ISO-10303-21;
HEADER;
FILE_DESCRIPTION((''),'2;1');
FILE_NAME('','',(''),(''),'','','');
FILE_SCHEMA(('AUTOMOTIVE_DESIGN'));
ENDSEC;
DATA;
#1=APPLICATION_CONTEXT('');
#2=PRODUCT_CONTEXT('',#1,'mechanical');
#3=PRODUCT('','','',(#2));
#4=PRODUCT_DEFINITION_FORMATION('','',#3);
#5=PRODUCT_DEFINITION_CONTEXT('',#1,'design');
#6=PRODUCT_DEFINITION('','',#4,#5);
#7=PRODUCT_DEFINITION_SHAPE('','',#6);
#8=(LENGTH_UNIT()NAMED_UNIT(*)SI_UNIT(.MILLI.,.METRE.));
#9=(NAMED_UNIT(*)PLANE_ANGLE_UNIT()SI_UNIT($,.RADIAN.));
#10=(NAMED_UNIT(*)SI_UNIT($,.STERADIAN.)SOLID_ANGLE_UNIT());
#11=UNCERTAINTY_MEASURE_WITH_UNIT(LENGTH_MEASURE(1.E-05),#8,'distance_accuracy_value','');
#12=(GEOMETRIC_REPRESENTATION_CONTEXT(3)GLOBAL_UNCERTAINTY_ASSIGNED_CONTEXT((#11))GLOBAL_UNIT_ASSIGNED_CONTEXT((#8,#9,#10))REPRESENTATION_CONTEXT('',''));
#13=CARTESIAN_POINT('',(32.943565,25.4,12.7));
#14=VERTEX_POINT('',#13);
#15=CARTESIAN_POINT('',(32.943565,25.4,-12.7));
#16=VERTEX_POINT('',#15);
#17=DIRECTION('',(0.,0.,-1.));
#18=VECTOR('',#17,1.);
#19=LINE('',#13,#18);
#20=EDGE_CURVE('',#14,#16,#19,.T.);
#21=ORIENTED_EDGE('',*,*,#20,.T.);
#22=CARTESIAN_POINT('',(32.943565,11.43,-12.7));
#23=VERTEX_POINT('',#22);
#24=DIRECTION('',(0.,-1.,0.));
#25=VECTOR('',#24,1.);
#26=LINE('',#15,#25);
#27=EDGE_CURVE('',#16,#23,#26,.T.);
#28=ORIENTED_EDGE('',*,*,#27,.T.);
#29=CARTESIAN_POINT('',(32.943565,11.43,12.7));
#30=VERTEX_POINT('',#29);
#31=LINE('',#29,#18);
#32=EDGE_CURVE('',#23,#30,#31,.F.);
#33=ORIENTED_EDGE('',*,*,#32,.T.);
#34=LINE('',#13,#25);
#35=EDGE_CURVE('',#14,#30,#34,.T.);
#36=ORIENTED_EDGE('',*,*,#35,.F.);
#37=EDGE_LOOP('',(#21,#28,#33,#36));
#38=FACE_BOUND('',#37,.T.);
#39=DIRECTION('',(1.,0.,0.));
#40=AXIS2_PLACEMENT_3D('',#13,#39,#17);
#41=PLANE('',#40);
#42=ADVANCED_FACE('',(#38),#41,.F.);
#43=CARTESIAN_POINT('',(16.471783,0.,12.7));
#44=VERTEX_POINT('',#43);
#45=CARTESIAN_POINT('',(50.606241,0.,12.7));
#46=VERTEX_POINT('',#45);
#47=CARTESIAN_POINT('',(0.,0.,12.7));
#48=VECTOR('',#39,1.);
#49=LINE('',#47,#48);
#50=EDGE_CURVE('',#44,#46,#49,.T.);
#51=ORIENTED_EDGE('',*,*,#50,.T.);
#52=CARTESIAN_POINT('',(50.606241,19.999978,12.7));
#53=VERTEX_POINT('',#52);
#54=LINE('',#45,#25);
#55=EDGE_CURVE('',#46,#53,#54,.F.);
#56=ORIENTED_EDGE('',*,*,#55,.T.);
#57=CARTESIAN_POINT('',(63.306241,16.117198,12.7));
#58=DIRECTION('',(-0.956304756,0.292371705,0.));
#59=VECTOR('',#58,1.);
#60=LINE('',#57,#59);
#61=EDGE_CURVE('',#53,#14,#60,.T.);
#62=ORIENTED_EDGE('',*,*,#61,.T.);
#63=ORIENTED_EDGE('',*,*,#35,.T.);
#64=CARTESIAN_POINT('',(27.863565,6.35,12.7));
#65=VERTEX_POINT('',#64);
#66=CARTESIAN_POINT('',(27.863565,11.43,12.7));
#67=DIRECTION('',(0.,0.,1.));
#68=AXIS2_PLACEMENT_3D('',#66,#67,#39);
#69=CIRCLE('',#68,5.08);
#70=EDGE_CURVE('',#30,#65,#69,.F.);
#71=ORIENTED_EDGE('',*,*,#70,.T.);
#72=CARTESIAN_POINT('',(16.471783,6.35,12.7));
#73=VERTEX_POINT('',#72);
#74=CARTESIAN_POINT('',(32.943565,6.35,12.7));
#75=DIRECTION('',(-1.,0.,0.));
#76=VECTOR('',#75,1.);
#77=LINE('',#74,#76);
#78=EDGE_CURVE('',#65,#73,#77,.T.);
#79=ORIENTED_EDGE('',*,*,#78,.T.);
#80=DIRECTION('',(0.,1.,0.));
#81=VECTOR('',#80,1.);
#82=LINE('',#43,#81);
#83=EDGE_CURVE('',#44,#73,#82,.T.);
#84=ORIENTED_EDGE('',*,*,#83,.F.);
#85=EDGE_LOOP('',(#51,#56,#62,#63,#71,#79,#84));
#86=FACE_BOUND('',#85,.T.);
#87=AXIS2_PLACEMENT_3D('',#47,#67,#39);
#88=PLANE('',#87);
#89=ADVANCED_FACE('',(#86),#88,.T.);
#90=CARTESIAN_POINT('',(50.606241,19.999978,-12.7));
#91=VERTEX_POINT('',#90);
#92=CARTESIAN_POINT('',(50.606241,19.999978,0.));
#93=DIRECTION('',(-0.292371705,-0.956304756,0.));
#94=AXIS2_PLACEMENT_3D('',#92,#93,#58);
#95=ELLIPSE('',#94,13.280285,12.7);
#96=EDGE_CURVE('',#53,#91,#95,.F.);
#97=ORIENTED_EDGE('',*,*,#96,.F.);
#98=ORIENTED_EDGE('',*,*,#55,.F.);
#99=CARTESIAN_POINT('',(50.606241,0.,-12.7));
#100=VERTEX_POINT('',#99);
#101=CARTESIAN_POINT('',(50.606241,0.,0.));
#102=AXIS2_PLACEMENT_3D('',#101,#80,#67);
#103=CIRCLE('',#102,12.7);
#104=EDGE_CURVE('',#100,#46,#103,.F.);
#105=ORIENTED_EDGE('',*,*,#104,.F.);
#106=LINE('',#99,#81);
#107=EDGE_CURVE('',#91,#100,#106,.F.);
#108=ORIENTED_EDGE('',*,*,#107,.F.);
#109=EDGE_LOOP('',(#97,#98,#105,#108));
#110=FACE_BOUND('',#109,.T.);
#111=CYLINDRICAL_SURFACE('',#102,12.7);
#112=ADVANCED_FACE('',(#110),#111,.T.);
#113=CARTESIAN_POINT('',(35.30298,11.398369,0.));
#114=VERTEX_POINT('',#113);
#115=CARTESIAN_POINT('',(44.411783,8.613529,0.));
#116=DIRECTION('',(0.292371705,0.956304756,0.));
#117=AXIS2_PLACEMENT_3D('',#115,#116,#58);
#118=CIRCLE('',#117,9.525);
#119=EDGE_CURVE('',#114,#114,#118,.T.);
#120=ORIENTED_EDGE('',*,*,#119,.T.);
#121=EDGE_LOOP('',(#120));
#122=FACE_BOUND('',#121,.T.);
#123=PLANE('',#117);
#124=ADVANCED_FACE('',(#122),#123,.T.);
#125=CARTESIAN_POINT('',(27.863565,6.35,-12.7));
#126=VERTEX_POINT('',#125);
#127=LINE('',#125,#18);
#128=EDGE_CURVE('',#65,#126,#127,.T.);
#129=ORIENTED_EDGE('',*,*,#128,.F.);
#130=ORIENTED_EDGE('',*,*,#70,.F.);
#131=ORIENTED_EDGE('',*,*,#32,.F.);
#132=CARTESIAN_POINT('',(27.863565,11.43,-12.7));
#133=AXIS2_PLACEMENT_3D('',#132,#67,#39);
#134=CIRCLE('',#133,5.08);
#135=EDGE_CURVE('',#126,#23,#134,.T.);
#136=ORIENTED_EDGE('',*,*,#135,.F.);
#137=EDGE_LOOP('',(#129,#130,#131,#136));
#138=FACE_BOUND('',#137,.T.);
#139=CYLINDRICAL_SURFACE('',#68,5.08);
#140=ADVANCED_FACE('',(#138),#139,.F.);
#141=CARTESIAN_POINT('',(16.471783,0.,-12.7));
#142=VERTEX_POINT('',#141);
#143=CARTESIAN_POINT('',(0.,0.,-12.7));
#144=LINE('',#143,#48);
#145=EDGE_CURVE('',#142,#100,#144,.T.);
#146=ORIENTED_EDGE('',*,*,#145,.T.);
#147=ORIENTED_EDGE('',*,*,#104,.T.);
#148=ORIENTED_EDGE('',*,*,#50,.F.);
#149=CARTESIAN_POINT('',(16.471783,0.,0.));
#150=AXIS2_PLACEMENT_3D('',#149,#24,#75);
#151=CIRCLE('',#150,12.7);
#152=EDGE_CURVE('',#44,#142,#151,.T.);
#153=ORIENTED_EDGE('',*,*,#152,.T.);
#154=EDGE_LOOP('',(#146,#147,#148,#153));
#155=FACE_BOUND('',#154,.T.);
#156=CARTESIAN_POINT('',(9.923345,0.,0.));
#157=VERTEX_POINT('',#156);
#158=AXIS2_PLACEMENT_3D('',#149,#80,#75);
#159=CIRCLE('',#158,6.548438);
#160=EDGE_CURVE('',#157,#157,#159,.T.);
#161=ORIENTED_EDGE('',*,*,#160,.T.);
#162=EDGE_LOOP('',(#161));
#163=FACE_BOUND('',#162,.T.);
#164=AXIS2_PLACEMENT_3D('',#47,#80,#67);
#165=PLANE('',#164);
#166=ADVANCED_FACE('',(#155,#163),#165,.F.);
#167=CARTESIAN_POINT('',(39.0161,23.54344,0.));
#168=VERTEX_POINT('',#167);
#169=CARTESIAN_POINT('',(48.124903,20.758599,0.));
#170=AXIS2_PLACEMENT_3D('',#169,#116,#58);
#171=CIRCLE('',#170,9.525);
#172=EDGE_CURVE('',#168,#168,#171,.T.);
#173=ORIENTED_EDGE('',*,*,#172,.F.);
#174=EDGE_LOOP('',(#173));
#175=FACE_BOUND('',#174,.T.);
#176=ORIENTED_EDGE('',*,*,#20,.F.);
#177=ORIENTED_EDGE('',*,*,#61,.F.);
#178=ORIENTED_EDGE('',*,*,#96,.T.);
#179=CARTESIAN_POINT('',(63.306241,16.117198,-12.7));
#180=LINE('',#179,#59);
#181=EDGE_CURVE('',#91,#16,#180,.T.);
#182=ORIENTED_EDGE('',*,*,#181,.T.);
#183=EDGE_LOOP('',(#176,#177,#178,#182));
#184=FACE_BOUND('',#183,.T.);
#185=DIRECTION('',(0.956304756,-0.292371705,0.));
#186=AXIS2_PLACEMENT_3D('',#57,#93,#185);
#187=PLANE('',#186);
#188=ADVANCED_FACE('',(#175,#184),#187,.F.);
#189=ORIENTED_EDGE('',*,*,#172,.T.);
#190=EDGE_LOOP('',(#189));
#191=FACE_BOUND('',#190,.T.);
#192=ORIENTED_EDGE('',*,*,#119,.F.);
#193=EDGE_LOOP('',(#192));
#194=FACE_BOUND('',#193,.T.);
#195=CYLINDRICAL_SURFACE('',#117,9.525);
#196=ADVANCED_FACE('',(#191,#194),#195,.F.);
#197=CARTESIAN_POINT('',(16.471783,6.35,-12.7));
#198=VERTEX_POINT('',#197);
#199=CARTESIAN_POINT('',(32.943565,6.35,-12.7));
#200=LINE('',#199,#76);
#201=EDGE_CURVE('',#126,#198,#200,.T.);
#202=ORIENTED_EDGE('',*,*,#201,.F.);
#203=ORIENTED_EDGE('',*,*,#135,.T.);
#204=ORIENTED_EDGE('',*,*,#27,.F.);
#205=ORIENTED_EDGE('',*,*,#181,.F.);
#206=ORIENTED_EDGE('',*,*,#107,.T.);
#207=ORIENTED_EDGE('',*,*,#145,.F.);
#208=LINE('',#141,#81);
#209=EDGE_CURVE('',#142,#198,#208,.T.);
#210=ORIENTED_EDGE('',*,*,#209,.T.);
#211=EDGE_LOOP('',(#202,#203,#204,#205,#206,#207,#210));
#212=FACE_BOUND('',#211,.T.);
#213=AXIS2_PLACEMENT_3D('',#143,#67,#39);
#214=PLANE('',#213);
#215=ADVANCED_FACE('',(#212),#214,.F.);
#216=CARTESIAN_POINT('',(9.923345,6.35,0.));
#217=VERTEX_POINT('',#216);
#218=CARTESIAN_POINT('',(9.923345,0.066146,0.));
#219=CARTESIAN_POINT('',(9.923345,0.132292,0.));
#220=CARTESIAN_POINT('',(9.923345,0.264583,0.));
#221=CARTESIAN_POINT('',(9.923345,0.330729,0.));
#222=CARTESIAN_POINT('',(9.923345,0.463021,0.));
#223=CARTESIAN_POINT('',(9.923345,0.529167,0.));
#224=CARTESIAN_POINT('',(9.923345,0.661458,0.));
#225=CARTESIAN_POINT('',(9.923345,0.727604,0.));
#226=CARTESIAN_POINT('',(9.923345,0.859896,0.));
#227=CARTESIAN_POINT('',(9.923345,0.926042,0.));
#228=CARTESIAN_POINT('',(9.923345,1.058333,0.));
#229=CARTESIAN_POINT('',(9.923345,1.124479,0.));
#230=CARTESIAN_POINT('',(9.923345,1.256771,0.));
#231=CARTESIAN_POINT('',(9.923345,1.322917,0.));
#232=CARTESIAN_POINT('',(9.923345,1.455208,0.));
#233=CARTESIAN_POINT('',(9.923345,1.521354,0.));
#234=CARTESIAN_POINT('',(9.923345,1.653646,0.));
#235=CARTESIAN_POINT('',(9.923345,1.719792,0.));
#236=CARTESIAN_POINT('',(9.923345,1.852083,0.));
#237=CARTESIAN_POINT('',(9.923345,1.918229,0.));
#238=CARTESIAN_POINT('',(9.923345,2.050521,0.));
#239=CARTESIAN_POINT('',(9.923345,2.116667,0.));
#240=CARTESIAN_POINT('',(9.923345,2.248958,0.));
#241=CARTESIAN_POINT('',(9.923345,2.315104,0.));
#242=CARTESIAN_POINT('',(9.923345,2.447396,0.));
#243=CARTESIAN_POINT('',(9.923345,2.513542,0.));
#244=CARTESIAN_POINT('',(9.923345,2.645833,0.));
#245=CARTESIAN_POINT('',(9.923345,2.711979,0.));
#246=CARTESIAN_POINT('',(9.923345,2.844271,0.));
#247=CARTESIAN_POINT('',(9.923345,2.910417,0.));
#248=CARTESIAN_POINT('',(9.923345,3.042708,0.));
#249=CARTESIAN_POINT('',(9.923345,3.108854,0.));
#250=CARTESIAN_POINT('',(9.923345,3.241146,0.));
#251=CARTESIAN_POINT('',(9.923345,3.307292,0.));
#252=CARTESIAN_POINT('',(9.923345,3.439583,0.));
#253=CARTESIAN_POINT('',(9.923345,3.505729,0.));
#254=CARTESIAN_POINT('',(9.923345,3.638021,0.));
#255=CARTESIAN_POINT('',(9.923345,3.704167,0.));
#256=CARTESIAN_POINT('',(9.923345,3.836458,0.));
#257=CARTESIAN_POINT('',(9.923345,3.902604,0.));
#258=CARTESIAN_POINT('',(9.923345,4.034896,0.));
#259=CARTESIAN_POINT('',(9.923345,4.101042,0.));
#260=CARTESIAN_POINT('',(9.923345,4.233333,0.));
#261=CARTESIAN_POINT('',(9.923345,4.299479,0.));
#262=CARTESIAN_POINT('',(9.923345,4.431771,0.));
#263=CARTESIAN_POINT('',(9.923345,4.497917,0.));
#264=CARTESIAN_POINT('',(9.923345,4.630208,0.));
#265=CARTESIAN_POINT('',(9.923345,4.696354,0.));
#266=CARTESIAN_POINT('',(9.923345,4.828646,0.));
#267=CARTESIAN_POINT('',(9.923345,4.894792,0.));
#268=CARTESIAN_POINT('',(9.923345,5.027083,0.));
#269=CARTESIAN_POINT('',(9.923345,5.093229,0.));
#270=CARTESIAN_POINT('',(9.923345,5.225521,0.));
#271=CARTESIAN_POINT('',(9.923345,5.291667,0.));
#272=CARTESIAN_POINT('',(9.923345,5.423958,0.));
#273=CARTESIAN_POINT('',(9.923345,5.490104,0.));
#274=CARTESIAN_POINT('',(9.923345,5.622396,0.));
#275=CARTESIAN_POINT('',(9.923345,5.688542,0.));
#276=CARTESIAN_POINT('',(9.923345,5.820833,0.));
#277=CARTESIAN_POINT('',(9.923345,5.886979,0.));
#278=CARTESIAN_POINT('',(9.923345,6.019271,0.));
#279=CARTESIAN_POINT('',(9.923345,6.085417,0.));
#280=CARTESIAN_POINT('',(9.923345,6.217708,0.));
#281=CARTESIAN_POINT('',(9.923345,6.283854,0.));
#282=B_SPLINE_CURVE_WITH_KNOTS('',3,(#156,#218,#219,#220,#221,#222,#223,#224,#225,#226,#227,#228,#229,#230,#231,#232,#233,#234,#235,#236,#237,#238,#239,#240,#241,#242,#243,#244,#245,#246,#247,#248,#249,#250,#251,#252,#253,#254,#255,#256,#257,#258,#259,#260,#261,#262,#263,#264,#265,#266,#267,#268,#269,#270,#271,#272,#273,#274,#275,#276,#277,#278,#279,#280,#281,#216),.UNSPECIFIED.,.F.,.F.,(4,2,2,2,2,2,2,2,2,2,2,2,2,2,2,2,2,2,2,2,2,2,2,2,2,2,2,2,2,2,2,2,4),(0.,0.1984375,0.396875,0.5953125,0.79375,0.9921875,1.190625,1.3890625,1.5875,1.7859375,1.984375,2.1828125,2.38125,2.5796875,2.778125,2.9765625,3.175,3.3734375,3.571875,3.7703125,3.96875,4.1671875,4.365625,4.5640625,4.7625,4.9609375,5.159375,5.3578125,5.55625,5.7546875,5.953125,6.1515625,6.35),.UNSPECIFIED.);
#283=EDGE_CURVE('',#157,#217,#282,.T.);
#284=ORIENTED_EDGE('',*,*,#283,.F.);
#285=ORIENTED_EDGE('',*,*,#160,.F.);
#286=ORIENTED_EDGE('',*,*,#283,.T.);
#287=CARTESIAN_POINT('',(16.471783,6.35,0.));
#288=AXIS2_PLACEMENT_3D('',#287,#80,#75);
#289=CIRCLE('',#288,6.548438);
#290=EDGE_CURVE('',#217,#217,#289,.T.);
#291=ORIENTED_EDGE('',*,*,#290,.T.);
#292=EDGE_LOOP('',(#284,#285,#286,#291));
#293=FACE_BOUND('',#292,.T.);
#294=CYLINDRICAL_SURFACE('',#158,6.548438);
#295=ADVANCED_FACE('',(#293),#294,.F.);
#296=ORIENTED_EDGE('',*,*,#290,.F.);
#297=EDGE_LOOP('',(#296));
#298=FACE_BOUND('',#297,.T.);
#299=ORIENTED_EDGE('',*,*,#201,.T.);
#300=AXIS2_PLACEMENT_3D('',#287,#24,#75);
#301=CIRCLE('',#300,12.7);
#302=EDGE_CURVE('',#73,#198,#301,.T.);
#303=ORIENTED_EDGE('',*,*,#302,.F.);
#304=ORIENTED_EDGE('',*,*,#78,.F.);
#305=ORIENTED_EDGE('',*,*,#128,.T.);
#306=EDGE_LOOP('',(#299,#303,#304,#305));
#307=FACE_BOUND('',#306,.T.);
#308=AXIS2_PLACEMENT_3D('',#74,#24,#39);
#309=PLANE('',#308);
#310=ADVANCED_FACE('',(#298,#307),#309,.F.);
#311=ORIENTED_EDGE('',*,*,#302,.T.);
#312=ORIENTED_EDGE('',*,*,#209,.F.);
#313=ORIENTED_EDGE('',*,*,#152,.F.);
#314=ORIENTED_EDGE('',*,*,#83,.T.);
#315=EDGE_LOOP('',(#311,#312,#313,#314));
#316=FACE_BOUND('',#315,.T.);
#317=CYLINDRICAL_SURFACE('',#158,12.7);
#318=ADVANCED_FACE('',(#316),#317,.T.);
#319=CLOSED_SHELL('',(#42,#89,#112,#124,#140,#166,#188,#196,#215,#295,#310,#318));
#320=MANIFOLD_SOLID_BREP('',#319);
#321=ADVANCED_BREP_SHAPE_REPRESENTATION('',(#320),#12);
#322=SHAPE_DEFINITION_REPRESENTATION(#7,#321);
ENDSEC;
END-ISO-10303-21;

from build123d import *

# Parameters (mm, degrees)
BOSS_EXTRUDE1_DEPTH = 12.7
SKETCH2_R           = 9.525
CUT_EXTRUDE1_DEPTH  = 12.7
SKETCH3_R           = 6.5484375
CUT_EXTRUDE2_DEPTH  = 68.319185137
FILLET3_START       = -1
FILLET3_DEPTH       = 26.4
CUT_EXTRUDE3_DEPTH  = 68.319185137
FILLET4_R           = 5.08


with BuildPart() as part:
    # Sketch1 → Boss-Extrude1 (new, symmetric)
    with BuildSketch(Plane.XY):
        Polygon((0, 0), (63.3062413, 0), (63.3062413, 16.117198375), (32.943565298, 25.4), (32.943565298, 6.35), (0, 6.35), align=None)
    extrude(amount=BOSS_EXTRUDE1_DEPTH, both=True)

    # Sketch2 → Cut-Extrude1 (cut)
    with BuildSketch(Plane(origin=(9.91780582, 32.439681136, 0), x_dir=(0.9563047559630374, -0.29237170472273033, 0), z_dir=(0.29237170472273033, 0.9563047559630374, 0))):
        with Locations(Location((39.952846873, 0, 0), (0, 0, 180))):
            Circle(SKETCH2_R)
    extrude(amount=-CUT_EXTRUDE1_DEPTH, mode=Mode.SUBTRACT)

    # Sketch3 → Cut-Extrude2 (cut, through all)
    with BuildSketch(Plane(origin=(0, 6.35, 0), x_dir=(1, 0, 0), z_dir=(0, 1, 0))):
        with Locations(Location((16.471782649, 0, 0), (0, 0, 180))):
            Circle(SKETCH3_R)
    extrude(amount=-CUT_EXTRUDE2_DEPTH, mode=Mode.SUBTRACT)

    # Fillet3: read off the stored shape, not the designer's step
    # Fillet3 outline → Fillet3 (cut)
    with BuildSketch(Plane(origin=(0, 0, 0), x_dir=(1, 0, 0), z_dir=(0, 1, 0)).offset(FILLET3_START)):
        with BuildLine():
            ThreePointArc((50.6062413, 12.7), (59.586497421, 8.980256121), (63.3062413, 0))
            Line((63.3062413, 0), (63.3062413, 12.7))
            Line((63.3062413, 12.7), (50.6062413, 12.7))
        make_face()
        with BuildLine():
            ThreePointArc((63.3062413, 0), (59.586497421, -8.980256121), (50.6062413, -12.7))
            Line((50.6062413, -12.7), (63.3062413, -12.7))
            Line((63.3062413, -12.7), (63.3062413, 0))
        make_face()
    extrude(amount=FILLET3_DEPTH, mode=Mode.SUBTRACT)

    # Sketch4 → Cut-Extrude3 (cut, through all)
    with BuildSketch(Plane(origin=(0, 6.35, 0), x_dir=(1, 0, 0), z_dir=(0, 1, 0))):
        with BuildLine():
            Line((16.471782649, 12.7), (0, 12.7))
            Line((0, 12.7), (0, -12.7))
            Line((0, -12.7), (16.471782649, -12.7))
            ThreePointArc((16.471782649, -12.7), (3.771782649, 0), (16.471782649, 12.7))
        make_face()
    extrude(amount=-CUT_EXTRUDE3_DEPTH, mode=Mode.SUBTRACT)

    # Fillet4
    fillet4_edges = [part.edges().sort_by_distance(p)[0] for p in [
        (32.943565298, 6.35, 0),
    ]]
    fillet(fillet4_edges, radius=FILLET4_R)


solid = part.part
